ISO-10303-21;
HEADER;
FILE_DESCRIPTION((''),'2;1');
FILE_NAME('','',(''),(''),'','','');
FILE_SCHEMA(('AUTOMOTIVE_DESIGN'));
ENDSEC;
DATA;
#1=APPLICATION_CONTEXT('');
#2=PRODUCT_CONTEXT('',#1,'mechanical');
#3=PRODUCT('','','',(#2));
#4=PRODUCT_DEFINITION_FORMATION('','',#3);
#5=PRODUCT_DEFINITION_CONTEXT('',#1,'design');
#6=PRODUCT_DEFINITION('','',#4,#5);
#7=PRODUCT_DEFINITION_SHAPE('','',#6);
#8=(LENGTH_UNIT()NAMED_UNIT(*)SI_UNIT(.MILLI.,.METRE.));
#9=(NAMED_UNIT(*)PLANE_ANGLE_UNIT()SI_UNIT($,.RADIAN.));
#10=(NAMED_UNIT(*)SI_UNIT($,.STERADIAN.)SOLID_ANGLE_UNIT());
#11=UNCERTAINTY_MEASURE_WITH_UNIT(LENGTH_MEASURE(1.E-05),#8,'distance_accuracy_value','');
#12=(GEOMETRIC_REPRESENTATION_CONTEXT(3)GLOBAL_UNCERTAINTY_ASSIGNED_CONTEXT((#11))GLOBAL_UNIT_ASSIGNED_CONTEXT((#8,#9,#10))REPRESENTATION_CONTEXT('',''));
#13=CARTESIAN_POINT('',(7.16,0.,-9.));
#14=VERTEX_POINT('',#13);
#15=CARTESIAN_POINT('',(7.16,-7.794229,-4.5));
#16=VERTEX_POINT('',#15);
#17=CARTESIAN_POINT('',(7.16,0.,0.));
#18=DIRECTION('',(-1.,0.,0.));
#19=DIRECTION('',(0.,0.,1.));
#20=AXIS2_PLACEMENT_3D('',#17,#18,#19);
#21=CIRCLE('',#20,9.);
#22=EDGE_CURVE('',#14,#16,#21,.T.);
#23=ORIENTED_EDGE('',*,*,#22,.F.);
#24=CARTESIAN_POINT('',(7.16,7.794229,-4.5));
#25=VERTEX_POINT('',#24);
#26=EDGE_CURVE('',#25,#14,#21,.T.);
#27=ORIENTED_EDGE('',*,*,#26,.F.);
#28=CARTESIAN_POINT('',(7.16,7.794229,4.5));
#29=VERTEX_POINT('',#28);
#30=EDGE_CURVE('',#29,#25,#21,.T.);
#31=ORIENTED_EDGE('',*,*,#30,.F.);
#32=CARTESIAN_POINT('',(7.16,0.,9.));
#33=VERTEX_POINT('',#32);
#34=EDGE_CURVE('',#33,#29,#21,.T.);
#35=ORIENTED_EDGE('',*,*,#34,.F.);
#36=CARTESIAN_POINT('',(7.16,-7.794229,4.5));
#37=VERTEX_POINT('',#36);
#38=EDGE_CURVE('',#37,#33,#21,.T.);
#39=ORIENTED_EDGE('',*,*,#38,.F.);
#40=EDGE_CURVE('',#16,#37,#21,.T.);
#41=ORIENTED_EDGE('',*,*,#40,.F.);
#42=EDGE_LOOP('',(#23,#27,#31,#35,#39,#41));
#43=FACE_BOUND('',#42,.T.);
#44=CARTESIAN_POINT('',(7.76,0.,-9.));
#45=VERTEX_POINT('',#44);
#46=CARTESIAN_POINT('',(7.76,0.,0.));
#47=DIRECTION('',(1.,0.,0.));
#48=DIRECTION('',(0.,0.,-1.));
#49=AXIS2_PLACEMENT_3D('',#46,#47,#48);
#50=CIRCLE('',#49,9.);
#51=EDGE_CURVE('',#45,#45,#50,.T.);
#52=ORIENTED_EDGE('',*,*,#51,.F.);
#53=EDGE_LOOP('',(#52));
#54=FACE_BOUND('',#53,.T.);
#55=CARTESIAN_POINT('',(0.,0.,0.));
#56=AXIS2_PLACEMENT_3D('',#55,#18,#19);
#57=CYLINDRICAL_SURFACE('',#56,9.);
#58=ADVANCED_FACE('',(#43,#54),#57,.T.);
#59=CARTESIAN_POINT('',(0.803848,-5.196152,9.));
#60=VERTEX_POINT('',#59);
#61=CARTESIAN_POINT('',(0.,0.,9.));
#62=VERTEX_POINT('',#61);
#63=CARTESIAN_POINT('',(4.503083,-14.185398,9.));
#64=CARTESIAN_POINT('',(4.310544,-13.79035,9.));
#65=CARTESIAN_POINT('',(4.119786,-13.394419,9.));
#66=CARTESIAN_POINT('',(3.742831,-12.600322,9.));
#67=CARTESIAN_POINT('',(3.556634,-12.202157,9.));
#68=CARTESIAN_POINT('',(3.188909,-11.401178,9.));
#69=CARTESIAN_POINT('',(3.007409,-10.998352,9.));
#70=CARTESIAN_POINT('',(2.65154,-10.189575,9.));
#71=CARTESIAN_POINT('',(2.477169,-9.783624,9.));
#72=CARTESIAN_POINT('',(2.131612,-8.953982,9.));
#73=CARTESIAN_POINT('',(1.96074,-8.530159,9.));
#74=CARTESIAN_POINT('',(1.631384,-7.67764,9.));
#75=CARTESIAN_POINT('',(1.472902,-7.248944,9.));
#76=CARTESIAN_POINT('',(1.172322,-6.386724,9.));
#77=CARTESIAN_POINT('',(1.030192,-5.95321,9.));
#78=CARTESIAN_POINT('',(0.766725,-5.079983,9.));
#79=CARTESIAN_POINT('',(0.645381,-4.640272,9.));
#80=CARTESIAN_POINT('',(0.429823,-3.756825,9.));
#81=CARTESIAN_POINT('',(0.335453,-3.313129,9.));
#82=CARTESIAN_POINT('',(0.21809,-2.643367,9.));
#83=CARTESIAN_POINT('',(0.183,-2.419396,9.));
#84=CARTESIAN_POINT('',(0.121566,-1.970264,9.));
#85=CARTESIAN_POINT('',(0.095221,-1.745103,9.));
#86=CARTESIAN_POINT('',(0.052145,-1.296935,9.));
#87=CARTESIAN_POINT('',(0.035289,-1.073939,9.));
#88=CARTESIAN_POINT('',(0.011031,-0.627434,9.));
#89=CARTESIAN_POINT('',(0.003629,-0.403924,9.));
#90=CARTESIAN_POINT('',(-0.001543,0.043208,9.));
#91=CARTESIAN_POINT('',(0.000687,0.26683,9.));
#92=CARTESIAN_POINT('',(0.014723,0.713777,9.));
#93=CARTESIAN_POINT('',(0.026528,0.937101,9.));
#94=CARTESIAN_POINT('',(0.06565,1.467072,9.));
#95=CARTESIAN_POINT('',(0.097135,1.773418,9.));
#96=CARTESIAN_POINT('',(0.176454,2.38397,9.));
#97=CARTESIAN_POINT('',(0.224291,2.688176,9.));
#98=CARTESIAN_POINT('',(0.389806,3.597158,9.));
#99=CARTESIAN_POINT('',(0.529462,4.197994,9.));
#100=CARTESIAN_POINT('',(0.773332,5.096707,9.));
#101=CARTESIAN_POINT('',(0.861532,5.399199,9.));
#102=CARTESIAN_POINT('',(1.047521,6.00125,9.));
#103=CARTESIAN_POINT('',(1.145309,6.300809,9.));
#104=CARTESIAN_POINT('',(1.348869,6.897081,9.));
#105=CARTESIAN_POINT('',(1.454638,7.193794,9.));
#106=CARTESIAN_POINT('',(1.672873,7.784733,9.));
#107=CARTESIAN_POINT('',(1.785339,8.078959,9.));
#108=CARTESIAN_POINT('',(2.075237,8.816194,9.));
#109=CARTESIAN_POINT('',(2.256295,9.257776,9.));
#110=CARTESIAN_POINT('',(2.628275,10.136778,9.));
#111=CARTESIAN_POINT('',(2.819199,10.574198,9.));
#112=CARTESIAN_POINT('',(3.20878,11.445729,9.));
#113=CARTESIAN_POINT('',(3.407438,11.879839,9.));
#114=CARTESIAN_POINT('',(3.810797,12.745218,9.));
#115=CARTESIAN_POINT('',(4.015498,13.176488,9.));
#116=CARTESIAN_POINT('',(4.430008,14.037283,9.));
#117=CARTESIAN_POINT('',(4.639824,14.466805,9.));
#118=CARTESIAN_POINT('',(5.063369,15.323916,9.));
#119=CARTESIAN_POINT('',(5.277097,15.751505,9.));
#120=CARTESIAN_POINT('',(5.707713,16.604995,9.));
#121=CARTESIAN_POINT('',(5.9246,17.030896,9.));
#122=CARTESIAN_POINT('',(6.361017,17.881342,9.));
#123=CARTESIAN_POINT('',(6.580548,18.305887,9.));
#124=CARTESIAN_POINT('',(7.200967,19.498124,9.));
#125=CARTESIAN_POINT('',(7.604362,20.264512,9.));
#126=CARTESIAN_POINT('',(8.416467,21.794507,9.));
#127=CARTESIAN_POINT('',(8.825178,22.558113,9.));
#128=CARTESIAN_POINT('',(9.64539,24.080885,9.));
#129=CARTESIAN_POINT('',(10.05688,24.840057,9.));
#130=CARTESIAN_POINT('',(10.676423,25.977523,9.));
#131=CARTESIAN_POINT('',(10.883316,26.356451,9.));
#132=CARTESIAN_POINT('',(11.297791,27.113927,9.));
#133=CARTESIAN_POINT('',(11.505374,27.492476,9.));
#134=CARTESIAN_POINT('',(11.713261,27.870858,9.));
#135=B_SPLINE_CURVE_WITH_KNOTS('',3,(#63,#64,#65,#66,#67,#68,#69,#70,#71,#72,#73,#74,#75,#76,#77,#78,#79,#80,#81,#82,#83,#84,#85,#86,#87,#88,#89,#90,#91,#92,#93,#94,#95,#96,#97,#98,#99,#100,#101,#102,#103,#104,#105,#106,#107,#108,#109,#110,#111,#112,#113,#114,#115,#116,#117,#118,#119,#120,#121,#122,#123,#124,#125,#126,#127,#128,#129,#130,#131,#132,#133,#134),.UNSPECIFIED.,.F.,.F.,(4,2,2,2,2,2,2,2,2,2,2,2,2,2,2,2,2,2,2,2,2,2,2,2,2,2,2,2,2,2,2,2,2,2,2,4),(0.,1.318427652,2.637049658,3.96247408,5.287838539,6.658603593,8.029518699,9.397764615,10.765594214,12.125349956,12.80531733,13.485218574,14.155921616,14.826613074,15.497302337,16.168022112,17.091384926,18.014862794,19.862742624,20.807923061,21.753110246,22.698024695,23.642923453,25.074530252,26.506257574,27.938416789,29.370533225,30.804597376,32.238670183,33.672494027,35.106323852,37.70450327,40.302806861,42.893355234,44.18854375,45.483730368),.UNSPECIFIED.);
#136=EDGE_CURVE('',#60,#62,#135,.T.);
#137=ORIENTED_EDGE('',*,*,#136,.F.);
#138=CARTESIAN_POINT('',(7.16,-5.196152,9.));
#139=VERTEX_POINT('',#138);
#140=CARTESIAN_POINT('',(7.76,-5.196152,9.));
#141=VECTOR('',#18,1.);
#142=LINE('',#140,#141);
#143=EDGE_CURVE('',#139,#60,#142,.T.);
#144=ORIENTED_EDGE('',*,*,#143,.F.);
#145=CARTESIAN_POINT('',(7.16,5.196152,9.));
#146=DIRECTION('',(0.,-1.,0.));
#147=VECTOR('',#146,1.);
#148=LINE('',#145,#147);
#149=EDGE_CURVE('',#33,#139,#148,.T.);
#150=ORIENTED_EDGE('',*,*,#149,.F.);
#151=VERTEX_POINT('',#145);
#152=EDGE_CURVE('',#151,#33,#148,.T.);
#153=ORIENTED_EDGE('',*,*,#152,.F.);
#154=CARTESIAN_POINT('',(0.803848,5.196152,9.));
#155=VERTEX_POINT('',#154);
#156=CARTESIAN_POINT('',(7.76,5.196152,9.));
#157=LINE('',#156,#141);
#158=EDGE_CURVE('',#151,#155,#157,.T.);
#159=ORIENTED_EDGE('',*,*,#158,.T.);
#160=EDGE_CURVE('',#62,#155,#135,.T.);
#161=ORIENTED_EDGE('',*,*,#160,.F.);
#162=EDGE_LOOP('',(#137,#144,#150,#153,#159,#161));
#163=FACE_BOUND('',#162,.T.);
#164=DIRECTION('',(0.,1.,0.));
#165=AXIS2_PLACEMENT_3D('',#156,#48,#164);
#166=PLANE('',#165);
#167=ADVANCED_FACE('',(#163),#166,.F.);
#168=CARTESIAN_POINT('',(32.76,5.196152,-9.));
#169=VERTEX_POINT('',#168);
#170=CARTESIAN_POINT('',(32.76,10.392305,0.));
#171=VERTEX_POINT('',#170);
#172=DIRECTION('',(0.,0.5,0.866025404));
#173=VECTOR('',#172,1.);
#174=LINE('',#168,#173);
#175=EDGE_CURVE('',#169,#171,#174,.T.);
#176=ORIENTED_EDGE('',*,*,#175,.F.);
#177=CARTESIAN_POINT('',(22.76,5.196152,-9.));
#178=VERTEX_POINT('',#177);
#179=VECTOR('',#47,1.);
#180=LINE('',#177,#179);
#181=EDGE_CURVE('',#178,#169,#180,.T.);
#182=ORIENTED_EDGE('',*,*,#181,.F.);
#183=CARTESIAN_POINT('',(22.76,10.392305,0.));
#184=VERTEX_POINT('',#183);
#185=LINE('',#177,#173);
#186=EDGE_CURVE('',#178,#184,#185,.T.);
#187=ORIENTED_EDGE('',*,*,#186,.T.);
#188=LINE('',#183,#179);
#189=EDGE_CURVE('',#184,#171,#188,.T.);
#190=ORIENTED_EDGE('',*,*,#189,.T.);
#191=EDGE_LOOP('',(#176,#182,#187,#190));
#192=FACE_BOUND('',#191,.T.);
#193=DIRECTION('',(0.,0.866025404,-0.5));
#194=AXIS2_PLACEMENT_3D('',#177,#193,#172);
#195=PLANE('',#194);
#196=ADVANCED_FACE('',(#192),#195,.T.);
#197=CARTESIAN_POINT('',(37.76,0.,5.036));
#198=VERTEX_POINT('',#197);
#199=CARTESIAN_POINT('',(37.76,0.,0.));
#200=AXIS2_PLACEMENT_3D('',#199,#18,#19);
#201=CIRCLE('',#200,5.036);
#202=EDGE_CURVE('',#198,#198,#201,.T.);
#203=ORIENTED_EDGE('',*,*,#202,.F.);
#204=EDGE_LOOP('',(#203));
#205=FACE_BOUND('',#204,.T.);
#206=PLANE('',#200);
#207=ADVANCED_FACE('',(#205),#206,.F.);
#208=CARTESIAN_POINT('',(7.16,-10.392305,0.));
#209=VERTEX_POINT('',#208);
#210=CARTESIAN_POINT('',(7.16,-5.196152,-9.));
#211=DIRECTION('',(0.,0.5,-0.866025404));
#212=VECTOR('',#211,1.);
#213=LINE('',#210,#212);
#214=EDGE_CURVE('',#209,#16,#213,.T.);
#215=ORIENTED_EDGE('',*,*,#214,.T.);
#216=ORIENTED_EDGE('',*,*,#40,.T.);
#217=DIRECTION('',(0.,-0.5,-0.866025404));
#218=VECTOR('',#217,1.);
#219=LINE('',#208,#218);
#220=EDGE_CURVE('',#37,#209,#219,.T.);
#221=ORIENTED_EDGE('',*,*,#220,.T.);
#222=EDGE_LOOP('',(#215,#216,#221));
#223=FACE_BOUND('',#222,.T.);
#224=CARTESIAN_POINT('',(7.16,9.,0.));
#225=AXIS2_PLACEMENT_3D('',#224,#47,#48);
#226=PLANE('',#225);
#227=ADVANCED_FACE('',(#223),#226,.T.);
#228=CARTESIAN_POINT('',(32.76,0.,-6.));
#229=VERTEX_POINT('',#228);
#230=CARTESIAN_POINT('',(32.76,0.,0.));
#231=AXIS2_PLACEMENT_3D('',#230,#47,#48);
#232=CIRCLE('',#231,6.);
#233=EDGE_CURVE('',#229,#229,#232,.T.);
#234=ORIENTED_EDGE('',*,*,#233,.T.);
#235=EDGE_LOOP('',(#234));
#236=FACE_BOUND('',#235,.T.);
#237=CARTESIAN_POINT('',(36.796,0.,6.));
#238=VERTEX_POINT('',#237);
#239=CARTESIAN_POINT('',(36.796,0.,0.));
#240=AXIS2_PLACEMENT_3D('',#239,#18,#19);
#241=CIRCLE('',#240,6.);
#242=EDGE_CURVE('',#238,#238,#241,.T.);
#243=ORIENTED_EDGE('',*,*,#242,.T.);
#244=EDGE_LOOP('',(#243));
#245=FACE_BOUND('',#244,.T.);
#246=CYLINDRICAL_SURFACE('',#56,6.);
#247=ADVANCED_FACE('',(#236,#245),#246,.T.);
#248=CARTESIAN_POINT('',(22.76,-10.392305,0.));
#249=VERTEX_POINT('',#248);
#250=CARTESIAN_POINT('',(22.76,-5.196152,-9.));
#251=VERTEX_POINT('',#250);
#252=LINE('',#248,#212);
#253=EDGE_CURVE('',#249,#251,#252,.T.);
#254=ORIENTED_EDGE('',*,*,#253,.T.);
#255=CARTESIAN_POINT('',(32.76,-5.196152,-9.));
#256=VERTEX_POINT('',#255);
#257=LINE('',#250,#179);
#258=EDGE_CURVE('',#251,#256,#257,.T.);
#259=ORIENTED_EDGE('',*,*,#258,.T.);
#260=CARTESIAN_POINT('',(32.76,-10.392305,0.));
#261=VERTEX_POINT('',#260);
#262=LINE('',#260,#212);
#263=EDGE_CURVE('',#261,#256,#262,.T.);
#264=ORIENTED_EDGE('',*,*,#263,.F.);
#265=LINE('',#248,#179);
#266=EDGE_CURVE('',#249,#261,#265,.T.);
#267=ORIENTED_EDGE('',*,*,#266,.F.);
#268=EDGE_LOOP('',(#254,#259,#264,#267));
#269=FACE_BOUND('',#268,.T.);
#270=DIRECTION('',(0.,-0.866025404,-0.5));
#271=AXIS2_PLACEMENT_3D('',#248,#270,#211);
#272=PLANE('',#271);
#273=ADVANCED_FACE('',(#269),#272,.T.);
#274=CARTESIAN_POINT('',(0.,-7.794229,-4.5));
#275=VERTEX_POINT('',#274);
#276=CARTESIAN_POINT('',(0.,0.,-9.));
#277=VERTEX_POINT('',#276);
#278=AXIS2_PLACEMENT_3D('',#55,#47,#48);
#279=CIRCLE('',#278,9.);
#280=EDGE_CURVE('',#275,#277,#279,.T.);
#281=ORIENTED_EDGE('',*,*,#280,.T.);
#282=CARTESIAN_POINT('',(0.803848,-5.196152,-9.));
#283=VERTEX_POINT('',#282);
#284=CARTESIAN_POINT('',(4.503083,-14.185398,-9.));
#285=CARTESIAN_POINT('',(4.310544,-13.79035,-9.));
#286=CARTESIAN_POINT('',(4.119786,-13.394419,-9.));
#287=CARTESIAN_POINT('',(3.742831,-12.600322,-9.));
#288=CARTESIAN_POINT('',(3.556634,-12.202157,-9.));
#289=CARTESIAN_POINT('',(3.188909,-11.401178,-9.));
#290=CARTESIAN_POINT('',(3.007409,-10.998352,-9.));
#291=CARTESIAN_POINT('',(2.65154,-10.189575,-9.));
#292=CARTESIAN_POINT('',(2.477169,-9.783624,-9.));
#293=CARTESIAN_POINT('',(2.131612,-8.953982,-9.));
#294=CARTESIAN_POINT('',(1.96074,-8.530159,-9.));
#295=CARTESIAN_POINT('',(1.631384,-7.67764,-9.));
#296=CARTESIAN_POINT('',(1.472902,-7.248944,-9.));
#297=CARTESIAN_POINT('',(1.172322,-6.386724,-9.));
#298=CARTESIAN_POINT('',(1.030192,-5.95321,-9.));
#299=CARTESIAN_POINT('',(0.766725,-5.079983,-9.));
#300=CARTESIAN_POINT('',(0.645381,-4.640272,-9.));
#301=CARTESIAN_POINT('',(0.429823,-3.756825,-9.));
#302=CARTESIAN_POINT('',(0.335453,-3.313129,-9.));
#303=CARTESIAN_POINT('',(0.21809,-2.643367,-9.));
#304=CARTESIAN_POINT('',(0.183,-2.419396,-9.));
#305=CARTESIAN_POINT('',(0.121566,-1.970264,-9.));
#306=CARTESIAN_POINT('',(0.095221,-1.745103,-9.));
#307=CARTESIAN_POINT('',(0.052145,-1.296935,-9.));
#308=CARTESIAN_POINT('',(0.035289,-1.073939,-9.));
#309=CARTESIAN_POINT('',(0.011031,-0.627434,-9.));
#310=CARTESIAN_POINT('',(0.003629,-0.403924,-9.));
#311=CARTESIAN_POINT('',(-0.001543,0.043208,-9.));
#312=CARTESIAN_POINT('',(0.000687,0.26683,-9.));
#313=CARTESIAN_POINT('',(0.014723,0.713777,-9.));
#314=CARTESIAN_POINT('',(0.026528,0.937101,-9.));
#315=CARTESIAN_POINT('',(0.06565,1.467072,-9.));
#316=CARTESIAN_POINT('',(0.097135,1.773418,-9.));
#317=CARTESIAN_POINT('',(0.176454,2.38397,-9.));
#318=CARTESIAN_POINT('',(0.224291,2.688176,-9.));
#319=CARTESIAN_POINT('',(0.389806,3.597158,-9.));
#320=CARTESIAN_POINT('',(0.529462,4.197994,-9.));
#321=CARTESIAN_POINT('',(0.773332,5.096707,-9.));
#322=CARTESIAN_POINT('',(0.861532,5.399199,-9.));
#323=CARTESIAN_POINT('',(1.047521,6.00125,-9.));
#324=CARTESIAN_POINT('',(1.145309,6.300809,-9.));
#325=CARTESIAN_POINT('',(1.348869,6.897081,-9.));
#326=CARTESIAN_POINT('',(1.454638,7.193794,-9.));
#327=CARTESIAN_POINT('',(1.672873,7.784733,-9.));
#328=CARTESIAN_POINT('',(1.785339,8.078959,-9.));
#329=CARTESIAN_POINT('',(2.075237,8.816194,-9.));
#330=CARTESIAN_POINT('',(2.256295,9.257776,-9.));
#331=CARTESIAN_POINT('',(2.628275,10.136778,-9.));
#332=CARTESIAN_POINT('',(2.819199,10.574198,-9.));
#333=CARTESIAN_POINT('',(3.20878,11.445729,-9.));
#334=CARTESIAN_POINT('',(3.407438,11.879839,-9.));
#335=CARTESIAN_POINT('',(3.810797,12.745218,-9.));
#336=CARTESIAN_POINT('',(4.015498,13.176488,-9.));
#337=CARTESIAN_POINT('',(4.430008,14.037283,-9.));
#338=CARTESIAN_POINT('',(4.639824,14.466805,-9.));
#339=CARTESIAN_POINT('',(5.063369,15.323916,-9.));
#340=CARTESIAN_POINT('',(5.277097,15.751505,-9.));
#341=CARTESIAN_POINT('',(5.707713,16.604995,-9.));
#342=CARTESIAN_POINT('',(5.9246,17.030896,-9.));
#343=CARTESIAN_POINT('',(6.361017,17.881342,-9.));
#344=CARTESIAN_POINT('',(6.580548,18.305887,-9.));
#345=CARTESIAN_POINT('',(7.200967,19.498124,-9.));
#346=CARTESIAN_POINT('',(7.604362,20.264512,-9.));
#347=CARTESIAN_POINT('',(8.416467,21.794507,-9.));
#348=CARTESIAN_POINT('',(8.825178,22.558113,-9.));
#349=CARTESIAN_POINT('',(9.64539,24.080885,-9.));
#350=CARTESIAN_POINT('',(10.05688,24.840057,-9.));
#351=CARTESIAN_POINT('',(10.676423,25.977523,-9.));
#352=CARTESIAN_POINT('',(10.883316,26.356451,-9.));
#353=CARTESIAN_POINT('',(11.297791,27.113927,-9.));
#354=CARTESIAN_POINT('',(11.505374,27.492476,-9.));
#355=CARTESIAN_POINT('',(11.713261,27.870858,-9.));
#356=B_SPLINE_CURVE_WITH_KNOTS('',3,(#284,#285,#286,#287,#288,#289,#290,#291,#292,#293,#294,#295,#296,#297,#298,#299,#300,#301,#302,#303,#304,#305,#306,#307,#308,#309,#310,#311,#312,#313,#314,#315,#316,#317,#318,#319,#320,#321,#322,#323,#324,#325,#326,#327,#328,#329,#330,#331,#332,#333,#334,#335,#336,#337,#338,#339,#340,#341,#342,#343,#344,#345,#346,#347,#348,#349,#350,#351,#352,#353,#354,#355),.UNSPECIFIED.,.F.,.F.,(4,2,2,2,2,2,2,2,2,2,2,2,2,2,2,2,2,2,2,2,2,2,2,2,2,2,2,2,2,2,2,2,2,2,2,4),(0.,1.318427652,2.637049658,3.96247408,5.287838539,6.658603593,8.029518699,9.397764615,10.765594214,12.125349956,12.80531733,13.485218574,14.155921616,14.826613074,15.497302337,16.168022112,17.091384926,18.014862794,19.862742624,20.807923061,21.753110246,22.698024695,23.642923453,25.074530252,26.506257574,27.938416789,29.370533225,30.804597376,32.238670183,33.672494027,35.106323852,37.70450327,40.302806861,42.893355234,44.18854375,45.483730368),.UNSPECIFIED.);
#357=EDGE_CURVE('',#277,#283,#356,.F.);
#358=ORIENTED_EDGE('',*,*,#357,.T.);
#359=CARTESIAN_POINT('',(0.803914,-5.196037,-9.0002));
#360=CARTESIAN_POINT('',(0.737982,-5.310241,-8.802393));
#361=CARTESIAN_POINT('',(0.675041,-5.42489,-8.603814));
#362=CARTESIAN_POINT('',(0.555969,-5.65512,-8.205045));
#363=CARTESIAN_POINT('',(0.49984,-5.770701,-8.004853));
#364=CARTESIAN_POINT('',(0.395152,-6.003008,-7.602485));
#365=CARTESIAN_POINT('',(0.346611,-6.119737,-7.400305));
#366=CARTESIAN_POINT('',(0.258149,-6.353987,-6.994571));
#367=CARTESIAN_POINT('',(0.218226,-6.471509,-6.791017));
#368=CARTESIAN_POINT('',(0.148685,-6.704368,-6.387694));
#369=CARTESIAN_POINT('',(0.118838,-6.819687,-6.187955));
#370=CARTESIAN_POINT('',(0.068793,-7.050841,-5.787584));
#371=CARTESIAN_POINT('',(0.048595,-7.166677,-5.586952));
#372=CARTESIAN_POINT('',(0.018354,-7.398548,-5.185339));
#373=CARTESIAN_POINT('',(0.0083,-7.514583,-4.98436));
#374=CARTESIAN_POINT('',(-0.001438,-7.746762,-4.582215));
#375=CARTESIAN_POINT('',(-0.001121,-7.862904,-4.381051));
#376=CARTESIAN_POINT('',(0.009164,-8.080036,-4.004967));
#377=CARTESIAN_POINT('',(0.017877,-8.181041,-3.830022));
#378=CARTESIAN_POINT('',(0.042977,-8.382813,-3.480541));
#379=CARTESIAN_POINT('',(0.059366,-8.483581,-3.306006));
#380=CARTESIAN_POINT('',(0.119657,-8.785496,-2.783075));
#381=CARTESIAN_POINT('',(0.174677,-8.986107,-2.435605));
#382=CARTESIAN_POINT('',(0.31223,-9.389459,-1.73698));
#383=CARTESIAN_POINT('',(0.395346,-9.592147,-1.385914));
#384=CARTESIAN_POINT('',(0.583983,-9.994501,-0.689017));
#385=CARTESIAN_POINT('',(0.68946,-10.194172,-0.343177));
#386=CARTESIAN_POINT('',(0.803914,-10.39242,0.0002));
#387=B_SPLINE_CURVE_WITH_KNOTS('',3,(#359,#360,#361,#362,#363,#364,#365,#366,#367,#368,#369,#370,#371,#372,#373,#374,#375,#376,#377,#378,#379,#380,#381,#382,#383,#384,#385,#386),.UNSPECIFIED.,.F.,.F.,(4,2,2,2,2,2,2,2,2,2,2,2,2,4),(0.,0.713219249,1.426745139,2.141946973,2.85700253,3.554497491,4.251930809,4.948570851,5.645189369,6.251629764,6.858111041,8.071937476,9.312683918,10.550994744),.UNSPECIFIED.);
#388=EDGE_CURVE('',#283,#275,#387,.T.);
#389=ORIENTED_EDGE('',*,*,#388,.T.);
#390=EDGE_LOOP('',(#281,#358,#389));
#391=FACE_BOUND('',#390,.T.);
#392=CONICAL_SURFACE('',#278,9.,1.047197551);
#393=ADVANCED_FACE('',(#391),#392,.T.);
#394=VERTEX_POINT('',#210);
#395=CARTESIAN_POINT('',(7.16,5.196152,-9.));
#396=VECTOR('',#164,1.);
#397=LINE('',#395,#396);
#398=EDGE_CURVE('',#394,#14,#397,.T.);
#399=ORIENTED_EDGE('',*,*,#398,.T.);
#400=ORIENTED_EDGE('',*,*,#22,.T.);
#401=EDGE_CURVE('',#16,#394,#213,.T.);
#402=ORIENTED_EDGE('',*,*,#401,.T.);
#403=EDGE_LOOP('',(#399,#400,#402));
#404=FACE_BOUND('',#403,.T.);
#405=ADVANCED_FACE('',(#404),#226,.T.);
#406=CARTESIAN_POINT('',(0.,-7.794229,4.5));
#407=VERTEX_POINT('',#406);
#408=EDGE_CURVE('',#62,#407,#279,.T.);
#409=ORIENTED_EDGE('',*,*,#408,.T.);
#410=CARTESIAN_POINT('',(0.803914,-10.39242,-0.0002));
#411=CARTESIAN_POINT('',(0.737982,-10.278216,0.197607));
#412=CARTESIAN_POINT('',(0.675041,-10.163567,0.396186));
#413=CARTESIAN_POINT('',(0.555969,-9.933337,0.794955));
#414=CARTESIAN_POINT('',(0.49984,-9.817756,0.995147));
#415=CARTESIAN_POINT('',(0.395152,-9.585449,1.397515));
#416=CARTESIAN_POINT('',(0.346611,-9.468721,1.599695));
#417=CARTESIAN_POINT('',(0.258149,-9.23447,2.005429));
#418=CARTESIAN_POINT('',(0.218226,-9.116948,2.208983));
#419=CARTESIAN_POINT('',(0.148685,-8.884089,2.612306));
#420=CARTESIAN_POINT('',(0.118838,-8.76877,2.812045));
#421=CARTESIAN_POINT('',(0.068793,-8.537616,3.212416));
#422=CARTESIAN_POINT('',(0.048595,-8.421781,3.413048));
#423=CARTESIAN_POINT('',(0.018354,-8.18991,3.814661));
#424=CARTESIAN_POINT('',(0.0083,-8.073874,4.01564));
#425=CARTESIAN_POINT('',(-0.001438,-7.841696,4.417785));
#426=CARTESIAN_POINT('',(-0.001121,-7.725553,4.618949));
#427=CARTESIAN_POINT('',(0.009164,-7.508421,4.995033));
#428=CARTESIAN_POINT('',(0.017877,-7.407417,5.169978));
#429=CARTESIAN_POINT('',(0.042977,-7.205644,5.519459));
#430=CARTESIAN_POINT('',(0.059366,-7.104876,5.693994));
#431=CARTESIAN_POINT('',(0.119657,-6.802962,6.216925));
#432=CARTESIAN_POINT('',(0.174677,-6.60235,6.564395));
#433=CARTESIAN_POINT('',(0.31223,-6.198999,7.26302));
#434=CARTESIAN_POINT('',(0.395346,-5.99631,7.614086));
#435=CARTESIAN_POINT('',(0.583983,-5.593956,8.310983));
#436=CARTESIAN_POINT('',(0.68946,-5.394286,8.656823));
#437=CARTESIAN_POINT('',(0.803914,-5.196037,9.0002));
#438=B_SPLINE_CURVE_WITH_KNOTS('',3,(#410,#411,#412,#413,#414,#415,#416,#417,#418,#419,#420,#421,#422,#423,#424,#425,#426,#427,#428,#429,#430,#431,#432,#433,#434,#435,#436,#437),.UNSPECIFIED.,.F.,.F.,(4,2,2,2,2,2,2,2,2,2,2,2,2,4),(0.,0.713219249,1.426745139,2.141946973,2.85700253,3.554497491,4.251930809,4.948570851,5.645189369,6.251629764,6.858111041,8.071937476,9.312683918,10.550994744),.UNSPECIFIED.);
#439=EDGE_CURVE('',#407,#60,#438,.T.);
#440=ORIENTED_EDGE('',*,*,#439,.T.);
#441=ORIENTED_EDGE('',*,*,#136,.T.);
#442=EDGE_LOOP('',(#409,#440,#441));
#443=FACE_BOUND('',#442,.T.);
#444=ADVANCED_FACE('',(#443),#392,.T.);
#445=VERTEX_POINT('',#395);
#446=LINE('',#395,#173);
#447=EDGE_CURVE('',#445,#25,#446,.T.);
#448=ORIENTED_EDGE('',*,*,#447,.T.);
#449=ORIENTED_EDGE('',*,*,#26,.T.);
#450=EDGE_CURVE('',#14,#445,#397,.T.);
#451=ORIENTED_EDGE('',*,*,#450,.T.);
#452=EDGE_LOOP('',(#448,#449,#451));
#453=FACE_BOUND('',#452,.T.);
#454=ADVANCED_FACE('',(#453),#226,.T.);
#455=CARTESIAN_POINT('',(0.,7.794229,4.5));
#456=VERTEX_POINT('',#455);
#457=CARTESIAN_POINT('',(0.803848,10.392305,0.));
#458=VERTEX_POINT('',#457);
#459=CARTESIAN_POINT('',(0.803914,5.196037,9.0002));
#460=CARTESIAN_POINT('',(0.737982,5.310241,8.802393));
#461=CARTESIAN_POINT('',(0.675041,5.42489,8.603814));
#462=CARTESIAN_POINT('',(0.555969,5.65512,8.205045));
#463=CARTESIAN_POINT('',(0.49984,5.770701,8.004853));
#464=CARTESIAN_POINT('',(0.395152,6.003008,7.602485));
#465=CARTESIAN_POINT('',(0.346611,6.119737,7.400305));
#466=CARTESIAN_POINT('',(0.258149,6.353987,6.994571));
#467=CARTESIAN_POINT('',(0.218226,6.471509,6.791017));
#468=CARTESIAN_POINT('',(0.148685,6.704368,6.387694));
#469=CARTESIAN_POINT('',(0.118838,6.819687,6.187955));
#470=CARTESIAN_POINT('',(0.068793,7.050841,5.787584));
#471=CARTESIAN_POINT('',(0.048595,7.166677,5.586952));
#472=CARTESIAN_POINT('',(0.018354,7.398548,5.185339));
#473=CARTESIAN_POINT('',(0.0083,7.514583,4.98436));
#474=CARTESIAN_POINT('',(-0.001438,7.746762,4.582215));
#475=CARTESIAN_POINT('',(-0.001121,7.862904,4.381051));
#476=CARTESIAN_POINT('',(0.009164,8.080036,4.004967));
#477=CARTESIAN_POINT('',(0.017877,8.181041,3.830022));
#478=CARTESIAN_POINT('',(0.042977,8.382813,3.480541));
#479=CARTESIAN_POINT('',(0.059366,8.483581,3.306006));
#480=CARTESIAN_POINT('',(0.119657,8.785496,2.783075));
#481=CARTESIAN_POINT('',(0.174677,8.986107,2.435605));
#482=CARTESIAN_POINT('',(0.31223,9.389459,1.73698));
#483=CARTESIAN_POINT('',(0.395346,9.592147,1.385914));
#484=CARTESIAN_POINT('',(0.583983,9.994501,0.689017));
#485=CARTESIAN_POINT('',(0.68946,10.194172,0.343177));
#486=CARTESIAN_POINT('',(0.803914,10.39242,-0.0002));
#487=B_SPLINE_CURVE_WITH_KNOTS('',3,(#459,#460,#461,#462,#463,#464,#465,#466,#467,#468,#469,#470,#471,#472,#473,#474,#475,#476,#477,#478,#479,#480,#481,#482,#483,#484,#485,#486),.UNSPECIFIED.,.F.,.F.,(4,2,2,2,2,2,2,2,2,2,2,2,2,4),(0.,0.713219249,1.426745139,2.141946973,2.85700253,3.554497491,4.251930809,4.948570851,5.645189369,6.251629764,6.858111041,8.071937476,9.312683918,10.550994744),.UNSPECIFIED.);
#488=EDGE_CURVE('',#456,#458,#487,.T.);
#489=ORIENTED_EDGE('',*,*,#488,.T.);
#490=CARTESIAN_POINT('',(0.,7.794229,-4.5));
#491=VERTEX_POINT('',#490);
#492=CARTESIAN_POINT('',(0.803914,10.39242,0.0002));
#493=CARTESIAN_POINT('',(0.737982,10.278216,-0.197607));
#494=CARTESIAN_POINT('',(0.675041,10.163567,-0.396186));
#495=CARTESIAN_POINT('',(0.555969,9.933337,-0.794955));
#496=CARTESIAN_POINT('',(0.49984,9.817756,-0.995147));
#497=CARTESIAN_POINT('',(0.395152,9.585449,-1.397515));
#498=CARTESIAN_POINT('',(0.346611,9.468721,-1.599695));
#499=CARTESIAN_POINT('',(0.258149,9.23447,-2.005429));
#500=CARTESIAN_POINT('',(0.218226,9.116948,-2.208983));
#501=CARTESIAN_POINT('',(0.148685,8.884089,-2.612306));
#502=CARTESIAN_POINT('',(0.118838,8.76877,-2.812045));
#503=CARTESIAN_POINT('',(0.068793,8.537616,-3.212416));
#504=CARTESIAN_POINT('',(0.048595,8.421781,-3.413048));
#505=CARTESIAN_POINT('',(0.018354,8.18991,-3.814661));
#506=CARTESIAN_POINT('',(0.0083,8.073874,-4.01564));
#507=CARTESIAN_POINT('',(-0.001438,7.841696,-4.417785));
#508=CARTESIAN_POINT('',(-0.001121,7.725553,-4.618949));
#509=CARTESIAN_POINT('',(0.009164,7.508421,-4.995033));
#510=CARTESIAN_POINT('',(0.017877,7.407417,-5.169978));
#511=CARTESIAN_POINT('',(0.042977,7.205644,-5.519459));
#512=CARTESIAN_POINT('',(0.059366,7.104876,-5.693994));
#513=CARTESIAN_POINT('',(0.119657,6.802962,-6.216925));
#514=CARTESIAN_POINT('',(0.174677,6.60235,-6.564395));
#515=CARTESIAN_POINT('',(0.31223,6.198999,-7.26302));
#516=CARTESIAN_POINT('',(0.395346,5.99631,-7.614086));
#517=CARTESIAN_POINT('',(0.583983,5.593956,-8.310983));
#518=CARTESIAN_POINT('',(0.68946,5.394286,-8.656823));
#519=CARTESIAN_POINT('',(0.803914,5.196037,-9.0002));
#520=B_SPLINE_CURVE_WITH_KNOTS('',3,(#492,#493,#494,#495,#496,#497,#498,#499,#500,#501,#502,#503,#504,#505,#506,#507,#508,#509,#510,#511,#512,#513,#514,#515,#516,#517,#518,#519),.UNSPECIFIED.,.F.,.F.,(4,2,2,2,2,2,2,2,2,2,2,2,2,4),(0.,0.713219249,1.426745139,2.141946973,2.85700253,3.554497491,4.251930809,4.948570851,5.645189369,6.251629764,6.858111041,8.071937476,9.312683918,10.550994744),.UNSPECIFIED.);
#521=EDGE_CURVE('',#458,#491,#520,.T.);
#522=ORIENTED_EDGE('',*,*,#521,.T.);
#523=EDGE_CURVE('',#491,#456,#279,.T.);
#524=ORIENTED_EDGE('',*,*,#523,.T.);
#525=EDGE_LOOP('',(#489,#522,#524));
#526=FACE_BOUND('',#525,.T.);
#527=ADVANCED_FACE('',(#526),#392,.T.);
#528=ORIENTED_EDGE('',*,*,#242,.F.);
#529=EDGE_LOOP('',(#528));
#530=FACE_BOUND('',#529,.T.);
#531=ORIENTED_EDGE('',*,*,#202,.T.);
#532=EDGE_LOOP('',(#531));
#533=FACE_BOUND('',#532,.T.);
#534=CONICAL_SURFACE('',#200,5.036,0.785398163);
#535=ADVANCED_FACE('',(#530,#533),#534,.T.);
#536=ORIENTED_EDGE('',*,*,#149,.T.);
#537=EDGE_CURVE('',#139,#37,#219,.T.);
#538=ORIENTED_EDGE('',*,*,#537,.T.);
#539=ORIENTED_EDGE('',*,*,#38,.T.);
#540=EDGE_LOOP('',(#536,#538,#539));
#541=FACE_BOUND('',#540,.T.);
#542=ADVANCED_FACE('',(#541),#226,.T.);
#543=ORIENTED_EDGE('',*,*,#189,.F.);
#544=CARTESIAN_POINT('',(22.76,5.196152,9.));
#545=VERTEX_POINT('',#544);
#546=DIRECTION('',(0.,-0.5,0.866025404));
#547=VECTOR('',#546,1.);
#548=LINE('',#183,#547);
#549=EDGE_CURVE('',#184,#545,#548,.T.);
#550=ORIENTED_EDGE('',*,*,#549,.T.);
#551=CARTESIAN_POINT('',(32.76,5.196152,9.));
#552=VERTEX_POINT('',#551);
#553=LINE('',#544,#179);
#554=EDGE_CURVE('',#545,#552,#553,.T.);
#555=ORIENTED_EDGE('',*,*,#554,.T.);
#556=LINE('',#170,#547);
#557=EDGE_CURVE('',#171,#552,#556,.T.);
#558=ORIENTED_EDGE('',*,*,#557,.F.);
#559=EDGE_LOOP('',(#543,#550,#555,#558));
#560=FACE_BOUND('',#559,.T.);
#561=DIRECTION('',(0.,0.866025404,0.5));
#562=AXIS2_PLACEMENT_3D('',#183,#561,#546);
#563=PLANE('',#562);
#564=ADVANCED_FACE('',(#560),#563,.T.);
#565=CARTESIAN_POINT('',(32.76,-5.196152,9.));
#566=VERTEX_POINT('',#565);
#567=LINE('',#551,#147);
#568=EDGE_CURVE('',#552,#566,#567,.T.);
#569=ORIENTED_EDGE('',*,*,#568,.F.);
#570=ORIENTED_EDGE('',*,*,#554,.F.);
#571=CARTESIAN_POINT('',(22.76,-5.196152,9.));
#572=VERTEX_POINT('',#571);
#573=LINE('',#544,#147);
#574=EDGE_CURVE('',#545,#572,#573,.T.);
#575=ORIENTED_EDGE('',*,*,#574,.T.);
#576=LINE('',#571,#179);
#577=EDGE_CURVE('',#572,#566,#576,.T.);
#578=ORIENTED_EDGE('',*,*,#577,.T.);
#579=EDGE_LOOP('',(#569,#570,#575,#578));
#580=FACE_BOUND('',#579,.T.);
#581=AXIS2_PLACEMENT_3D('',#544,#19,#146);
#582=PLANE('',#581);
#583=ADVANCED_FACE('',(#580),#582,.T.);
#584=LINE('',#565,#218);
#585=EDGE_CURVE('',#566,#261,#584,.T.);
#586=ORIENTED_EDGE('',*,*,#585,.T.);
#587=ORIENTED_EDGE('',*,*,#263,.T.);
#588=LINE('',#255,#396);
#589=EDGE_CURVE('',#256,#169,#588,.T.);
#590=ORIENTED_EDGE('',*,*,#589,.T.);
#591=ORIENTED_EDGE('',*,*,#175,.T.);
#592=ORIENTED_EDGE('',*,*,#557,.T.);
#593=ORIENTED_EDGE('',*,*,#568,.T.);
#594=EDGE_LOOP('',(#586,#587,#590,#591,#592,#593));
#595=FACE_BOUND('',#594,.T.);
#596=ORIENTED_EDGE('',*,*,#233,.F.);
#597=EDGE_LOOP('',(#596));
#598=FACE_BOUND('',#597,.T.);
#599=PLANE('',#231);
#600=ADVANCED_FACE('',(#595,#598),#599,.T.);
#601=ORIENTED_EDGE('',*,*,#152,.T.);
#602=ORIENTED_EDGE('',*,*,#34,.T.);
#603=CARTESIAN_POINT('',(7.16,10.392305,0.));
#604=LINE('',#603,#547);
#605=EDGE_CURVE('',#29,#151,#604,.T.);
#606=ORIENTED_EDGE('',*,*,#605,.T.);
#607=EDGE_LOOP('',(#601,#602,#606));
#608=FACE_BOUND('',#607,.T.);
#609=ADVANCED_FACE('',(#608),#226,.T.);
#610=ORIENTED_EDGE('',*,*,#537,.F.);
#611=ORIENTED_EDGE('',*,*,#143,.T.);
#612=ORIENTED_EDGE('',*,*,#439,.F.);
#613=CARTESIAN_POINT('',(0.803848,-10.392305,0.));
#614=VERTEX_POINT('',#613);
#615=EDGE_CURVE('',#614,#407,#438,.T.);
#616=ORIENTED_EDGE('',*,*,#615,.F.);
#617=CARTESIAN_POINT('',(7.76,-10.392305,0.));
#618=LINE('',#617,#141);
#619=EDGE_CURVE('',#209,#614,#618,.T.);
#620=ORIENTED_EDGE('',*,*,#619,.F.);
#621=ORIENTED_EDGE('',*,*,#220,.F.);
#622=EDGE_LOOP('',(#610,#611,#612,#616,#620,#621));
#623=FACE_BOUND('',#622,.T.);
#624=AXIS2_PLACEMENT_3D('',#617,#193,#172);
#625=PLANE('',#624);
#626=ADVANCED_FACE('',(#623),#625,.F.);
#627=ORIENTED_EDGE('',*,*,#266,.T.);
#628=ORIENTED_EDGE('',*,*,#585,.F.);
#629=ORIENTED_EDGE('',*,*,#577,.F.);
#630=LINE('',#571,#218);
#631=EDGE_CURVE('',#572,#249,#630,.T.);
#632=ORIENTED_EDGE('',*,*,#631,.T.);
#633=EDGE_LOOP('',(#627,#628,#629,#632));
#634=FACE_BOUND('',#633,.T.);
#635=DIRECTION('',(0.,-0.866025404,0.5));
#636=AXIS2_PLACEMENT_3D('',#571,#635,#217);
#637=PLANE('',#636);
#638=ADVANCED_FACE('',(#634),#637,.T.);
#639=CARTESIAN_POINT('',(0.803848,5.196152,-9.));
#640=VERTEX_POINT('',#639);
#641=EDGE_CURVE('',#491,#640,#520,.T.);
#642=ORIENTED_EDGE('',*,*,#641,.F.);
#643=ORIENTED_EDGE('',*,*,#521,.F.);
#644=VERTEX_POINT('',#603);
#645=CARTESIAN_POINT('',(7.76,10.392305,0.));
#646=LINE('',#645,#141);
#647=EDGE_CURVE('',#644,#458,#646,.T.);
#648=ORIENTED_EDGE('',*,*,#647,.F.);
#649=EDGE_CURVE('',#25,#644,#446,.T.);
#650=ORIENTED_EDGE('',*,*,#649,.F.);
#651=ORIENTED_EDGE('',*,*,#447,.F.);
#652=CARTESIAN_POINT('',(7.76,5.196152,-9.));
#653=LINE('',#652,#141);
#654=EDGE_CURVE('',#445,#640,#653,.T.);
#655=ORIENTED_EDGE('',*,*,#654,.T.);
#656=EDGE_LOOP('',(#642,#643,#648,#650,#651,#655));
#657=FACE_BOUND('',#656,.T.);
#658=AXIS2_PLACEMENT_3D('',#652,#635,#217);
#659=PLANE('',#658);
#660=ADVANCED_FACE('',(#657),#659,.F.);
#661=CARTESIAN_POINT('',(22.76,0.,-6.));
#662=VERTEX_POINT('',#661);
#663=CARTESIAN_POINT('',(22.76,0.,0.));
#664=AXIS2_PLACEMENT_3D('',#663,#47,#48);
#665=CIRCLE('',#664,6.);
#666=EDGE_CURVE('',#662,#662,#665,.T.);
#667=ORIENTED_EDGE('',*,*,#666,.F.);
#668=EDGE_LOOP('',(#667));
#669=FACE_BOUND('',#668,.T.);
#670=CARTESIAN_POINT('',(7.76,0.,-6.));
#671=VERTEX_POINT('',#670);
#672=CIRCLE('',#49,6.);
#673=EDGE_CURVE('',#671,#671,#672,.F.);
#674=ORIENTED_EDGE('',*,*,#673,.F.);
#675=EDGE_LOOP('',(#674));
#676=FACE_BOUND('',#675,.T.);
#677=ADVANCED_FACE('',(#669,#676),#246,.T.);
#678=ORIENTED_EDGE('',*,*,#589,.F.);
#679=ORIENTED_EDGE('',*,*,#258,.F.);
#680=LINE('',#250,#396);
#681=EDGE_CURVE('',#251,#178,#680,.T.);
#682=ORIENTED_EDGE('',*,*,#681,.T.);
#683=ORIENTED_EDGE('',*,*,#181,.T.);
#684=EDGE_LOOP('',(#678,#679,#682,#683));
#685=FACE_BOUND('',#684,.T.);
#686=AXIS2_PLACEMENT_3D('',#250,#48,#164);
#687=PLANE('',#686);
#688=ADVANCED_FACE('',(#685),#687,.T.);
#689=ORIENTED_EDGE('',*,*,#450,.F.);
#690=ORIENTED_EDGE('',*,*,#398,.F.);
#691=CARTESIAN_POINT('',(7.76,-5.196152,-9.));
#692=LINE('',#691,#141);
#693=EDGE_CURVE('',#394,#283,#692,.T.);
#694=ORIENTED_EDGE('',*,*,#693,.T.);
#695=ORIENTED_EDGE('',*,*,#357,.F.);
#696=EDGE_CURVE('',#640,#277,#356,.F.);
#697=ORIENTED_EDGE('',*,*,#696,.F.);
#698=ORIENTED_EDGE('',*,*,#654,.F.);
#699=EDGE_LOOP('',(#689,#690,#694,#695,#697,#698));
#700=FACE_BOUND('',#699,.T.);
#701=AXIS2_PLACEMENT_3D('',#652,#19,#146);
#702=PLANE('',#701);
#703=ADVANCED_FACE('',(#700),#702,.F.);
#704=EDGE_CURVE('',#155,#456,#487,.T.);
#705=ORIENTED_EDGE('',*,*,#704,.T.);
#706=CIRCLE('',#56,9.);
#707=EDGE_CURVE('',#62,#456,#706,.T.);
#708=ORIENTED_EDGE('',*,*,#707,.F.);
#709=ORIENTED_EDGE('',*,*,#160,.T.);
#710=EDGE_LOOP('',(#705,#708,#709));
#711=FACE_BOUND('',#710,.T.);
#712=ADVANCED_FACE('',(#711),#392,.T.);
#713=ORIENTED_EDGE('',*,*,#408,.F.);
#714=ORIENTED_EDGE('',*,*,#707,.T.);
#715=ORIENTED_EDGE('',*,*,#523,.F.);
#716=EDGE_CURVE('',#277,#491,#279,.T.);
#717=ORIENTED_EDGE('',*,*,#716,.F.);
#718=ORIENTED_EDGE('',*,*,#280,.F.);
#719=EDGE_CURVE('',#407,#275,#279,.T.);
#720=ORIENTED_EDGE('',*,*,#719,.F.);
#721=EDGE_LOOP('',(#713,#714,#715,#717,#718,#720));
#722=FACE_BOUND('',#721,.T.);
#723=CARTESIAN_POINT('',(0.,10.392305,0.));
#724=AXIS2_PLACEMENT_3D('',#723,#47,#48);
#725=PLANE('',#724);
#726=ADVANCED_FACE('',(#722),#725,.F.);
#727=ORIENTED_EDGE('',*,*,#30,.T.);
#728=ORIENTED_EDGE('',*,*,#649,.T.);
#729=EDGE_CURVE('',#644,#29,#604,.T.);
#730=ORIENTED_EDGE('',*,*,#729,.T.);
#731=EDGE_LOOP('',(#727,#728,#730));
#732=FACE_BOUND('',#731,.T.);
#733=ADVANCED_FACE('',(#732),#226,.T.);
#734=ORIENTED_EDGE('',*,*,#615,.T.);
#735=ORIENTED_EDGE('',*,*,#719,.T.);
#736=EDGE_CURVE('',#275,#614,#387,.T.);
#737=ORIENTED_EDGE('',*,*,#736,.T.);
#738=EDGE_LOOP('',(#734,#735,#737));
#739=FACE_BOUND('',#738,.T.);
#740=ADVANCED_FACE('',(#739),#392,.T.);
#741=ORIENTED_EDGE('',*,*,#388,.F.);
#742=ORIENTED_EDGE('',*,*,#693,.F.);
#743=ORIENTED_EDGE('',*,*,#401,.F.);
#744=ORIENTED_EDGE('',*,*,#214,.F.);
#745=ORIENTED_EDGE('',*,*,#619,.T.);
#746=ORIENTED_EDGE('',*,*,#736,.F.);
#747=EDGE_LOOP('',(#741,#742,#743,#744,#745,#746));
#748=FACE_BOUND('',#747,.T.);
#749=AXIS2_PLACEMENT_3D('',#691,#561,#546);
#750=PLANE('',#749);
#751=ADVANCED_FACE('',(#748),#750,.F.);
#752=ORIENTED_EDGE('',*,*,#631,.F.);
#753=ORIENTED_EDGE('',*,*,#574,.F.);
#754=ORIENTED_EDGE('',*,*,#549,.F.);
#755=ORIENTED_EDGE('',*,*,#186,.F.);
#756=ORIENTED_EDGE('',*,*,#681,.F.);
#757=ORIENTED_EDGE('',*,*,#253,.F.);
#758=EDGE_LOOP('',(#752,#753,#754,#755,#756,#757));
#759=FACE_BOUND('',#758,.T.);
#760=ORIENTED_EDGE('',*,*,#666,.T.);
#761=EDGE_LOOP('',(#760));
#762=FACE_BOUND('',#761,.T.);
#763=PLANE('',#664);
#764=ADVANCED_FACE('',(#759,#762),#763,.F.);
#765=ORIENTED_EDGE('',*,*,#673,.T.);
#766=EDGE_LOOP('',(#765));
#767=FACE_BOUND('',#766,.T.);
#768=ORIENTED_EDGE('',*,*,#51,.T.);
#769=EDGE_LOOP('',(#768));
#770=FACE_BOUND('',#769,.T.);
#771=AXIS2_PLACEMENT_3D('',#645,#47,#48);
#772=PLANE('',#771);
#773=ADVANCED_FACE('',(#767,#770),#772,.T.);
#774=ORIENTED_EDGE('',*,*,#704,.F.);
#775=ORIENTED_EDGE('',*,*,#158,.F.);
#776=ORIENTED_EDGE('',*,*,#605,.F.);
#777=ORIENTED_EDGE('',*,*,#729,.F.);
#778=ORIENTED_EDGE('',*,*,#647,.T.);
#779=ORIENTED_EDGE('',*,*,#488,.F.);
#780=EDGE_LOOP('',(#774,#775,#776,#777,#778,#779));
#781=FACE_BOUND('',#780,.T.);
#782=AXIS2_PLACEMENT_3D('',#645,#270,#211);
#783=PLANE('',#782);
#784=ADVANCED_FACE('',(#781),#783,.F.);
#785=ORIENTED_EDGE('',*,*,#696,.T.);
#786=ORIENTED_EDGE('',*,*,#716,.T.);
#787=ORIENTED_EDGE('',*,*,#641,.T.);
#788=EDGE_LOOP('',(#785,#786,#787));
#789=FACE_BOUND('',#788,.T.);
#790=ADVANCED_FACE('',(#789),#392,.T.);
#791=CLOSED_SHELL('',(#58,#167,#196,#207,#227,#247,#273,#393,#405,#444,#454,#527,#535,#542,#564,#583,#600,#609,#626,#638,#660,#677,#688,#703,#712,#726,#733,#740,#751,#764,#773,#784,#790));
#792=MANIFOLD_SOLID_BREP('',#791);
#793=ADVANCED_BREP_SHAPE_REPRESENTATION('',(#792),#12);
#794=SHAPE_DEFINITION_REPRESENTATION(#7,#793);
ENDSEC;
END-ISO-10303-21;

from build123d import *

# Parameters (mm, degrees)
BASEHEAD_DEPTH      = 7.76
SKETCH4_W           = 0.6
SKETCH4_H           = 11.392304845
BOSS_EXTRUDE1_DEPTH = 10


# Read off the part's stored shape, not the designer's step: HeadChamfer
with BuildPart() as part:
    # Sketch1 → BaseHead (new body)
    with BuildSketch(Plane(origin=(0, 0, 0), x_dir=(0, 0, -1), z_dir=(1, 0, 0))):
        Polygon((9, 5.196152423), (9, -5.196152423), (0, -10.392304845), (-9, -5.196152423), (-9, 5.196152423), (0, 10.392304845), align=None)
    extrude(amount=BASEHEAD_DEPTH)

    # HeadChamfer outline → HeadChamfer (revolve, cut)
    with BuildSketch(Plane.YX):
        Polygon((10.392304847, 0.803847578), (9, 0), (10.392304847, 0), align=None)
    revolve(axis=Axis((0, 0, 0), (1, 0, 0)), mode=Mode.SUBTRACT)

    # HeadChamfer 2 outline → HeadChamfer 2 (revolve)
    with BuildSketch(Plane.YX):
        Polygon((6, 7.76), (6, 36.796), (5.036, 37.76), (0, 37.76), (0, 7.76), align=None)
    revolve(axis=Axis((0, 0, 0), (1, 0, 0)))

    # Sketch4 → BearingFace (revolve, cut)
    with BuildSketch(Plane.XY, mode=Mode.PRIVATE) as bearingface_sk:
        with Locations((7.46, 14.696152423)):
            Rectangle(SKETCH4_W, SKETCH4_H)
    revolve(bearingface_sk.sketch.rotate(Axis((0, 0, 0), (1, 0, 0)), 90), axis=Axis((0, 0, 0), (1, 0, 0)), mode=Mode.SUBTRACT)

    # Sketch5 → Boss-Extrude1 (add)
    with BuildSketch(Plane(origin=(32.76, 0, 0), x_dir=(0, 0, -1), z_dir=(1, 0, 0))):
        Polygon((0, 10.392304845), (-9, 5.196152423), (-9, -5.196152423), (0, -10.392304845), (9, -5.196152423), (9, 5.196152423), align=None)
    extrude(amount=-BOSS_EXTRUDE1_DEPTH)


solid = part.part
